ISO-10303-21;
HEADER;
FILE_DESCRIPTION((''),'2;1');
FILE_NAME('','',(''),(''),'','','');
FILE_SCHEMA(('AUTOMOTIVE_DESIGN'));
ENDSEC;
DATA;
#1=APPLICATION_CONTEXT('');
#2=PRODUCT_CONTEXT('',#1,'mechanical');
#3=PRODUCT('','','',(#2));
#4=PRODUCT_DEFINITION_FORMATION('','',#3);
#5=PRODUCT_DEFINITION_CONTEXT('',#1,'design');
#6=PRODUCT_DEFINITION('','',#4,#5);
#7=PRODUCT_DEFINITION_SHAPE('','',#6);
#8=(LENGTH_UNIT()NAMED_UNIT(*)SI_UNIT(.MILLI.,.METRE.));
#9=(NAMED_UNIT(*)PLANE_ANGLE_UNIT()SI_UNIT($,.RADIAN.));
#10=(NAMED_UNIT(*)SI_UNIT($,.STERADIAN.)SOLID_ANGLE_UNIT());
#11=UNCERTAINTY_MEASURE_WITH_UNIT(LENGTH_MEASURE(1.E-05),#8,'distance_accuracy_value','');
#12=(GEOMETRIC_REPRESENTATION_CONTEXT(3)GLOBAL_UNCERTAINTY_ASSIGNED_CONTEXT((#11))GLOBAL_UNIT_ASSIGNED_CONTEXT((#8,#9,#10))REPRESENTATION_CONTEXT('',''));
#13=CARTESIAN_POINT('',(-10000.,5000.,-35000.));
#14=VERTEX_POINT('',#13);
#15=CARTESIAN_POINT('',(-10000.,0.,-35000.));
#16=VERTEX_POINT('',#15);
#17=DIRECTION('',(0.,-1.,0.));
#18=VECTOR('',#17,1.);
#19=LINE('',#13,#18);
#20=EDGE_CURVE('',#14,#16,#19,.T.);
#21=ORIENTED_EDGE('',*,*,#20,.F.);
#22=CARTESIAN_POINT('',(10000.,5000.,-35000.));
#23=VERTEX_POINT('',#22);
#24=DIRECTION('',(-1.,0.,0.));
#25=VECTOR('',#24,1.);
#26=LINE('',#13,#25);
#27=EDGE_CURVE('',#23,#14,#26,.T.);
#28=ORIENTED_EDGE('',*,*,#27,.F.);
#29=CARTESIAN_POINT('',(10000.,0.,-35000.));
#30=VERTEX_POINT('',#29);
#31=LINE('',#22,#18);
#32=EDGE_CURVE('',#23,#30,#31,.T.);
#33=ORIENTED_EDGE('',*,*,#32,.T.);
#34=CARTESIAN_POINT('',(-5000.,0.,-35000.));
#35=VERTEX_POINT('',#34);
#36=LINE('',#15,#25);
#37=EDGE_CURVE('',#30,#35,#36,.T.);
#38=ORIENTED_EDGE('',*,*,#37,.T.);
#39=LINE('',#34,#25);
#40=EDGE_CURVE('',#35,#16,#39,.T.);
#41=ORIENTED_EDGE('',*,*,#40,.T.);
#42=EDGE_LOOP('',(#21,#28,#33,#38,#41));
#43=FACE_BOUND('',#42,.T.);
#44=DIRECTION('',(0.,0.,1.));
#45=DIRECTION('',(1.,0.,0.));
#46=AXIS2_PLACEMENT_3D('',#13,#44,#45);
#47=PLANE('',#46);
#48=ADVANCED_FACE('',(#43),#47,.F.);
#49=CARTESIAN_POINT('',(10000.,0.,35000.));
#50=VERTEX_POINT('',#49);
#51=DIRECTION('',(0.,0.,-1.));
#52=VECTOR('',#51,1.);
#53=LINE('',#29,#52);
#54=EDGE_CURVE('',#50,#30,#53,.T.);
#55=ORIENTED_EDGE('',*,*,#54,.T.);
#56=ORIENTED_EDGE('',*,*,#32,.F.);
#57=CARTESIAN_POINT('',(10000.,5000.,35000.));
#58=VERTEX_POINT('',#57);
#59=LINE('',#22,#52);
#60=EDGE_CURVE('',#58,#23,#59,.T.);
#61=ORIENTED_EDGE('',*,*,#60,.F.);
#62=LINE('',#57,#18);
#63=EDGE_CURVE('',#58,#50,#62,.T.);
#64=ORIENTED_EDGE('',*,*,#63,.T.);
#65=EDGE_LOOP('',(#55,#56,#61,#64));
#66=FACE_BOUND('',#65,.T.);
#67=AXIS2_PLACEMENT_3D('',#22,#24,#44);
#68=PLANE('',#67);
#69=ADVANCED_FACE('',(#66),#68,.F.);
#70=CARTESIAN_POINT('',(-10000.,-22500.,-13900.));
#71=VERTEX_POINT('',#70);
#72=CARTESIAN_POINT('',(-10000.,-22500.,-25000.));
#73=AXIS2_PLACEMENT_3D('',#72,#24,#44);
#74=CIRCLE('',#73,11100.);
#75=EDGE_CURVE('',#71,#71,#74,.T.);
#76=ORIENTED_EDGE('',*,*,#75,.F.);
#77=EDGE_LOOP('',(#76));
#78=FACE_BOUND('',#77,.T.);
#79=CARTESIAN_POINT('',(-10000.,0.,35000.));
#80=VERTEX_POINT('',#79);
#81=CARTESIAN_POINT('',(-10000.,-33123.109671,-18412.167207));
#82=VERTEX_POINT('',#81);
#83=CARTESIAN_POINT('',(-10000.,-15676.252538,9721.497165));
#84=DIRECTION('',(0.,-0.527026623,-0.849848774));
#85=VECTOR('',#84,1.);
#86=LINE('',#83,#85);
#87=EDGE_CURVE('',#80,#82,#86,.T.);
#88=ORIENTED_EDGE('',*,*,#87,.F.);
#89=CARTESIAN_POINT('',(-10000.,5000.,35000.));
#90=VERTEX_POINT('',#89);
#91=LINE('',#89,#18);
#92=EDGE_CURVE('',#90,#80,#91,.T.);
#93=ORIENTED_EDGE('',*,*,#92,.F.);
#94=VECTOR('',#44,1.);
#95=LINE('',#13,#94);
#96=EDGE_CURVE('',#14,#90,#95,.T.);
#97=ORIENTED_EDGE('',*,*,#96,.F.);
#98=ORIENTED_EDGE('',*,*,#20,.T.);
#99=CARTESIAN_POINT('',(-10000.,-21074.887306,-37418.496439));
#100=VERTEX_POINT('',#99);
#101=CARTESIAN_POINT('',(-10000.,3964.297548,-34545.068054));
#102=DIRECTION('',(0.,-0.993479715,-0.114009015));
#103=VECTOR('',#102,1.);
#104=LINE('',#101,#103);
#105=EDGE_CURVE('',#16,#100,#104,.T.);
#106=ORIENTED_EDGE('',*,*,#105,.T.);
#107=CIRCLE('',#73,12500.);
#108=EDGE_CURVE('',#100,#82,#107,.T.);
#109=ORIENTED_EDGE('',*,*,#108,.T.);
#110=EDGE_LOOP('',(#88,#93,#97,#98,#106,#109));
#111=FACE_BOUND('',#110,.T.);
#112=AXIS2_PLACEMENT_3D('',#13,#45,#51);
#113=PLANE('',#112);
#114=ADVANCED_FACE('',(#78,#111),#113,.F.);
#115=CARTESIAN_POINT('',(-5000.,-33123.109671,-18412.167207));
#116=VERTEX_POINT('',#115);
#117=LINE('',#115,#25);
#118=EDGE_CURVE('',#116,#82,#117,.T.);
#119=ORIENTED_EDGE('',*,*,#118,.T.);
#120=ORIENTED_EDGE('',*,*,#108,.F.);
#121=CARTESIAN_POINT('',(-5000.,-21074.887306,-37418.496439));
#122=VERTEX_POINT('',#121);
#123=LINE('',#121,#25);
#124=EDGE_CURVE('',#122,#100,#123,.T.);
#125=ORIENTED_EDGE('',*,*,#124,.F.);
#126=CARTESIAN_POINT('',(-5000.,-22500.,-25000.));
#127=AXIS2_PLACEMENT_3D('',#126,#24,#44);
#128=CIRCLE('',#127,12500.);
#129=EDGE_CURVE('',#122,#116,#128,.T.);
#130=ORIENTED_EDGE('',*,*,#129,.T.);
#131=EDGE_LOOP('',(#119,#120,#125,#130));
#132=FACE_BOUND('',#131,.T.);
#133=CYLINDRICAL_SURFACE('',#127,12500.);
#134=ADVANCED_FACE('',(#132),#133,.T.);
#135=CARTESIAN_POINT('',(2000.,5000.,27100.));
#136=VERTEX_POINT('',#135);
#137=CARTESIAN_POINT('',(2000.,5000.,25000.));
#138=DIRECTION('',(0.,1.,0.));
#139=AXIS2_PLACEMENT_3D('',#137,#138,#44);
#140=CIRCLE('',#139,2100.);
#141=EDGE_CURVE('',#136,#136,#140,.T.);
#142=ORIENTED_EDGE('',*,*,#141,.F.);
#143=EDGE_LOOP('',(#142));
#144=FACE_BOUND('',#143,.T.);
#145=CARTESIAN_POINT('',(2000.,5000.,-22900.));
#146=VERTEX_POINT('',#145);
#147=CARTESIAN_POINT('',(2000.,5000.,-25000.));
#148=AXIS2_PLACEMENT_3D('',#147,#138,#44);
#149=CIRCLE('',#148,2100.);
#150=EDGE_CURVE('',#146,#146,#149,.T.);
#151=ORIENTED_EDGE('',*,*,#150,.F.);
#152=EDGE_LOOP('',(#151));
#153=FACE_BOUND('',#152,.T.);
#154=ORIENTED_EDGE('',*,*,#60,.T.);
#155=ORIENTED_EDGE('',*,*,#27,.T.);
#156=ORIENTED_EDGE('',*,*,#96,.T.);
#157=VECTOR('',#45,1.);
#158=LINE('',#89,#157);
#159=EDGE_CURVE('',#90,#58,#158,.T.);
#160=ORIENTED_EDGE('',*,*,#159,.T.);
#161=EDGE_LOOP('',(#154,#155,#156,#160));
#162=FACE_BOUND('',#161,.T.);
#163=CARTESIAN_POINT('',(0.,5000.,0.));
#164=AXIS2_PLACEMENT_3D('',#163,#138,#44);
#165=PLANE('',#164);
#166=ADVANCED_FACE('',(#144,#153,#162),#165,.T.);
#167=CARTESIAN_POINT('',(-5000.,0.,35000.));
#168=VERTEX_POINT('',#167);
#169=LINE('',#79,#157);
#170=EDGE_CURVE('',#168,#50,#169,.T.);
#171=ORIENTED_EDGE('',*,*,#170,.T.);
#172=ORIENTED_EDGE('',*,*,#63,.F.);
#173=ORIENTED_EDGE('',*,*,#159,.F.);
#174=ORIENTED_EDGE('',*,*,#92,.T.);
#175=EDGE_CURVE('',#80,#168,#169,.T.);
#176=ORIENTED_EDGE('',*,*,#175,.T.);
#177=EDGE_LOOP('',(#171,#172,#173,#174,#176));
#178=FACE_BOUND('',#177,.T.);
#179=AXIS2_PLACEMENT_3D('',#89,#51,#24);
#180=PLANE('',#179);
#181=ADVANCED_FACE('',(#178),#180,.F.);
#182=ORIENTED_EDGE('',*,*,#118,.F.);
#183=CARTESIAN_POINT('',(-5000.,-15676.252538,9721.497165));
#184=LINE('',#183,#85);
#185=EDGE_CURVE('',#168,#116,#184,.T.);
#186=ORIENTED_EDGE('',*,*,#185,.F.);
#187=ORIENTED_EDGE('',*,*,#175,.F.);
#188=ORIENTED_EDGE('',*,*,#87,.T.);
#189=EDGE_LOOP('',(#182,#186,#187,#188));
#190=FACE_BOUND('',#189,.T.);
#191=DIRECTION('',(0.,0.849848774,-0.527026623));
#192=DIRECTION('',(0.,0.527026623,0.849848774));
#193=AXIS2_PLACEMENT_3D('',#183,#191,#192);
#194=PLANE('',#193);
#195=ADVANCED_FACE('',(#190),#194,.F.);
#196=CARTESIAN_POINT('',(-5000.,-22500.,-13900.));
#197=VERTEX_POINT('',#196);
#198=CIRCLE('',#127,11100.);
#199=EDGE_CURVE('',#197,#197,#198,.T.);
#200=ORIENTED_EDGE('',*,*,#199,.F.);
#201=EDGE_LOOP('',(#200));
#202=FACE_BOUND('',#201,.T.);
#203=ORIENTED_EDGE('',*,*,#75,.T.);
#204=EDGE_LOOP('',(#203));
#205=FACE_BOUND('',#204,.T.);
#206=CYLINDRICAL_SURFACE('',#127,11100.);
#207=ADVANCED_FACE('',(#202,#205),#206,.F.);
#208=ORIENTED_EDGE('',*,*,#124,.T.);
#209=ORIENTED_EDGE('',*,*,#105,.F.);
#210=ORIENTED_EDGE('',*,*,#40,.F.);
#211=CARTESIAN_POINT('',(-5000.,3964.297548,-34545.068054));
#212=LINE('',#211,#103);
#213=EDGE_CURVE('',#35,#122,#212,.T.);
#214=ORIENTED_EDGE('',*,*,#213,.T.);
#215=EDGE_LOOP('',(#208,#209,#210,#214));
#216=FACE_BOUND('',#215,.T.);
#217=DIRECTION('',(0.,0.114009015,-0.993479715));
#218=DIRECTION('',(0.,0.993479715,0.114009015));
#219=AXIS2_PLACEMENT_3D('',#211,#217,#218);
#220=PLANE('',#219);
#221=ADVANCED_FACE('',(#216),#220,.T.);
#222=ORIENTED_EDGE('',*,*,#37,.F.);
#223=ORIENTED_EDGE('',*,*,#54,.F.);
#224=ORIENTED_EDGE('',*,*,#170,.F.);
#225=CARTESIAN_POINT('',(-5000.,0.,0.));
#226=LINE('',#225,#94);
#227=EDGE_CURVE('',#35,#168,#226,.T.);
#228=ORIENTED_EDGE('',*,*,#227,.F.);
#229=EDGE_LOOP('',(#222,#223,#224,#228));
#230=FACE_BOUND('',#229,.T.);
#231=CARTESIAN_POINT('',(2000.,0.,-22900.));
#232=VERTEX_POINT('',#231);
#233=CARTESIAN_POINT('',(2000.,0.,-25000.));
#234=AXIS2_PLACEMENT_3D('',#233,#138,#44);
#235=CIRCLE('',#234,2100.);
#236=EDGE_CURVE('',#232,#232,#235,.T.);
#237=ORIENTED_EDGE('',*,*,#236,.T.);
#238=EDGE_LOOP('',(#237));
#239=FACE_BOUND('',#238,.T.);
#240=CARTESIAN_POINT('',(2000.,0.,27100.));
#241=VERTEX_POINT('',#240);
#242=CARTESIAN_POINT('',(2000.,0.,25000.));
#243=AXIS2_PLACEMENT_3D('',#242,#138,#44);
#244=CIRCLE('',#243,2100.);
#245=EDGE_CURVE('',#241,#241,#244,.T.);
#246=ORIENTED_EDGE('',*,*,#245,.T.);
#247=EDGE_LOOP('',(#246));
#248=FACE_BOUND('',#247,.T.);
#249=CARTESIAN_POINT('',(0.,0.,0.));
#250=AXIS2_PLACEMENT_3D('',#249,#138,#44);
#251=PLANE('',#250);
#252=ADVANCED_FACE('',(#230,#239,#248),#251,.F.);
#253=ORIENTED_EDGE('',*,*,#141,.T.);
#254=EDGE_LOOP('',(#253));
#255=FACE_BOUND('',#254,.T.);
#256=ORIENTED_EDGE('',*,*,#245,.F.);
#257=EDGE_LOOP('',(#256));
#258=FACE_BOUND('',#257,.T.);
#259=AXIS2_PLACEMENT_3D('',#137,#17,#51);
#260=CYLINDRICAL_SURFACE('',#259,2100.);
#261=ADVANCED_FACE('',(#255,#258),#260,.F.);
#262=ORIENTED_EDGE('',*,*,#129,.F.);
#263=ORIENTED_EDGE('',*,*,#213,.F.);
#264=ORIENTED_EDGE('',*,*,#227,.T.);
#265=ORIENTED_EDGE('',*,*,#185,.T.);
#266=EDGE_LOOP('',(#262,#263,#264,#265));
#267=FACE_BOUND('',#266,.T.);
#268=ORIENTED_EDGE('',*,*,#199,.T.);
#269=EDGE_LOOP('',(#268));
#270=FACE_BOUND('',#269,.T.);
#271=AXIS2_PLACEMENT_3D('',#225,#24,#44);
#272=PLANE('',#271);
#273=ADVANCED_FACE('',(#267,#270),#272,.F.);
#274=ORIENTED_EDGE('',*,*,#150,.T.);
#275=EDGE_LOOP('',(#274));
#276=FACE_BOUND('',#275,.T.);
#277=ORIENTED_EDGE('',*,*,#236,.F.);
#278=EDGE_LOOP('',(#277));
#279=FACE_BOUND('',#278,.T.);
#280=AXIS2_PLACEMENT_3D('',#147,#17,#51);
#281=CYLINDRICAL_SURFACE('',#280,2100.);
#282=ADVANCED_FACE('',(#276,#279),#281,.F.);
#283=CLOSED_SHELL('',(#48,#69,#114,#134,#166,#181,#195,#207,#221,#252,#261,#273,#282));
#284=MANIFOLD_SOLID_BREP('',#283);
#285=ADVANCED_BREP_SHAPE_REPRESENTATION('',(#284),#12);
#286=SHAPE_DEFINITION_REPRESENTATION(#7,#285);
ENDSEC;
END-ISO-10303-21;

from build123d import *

# Parameters (mm, degrees)
SKETCH_1_W          = 20000
SKETCH_1_H          = 70000
SKETCH_1_R          = 2100
EXTRUDE_1_DEPTH     = 5000
EXTRUDE_4_DEPTH     = 5000
SKETCH_2_7_R        = 11100
EXTRUDE_5_DEPTH     = 5000
SKETCH_3_W          = 17634.57068131
SKETCH_3_H          = 22931.716444608
CUT_EXTRUDE_1_DEPTH = 24449


with BuildPart() as part:
    # 草圖1 → 填料-伸長1 (new body)
    with BuildSketch(Plane(origin=(0, 0, 0), x_dir=(1, 0, 0), z_dir=(0, 1, 0))):
        Rectangle(SKETCH_1_W, SKETCH_1_H)
        with Locations((2000, 25000)):
            Circle(SKETCH_1_R, mode=Mode.SUBTRACT)
        with Locations((2000, -25000)):
            Circle(SKETCH_1_R, mode=Mode.SUBTRACT)
    extrude(amount=EXTRUDE_1_DEPTH)

    # 草圖2<7> → 填料-伸長5 (add)
    with BuildSketch(Plane.ZY.offset(10000)):
        with BuildLine():
            Line((35000, 0), (-35000, 0))
            Line((-35000, 0), (-37418.496439194, -21074.887306309))
            ThreePointArc((-37418.496439194, -21074.887306309), (-31692.464058642, -33057.505615617), (-18412.167206629, -33123.109671211))
            Line((-18412.167206629, -33123.109671211), (35000, 0))
        make_face()
        with Locations((-25000, -22500)):
            Circle(SKETCH_2_7_R, mode=Mode.SUBTRACT)
    extrude(amount=-EXTRUDE_5_DEPTH)


with BuildPart() as body_2:
    # 草圖2 → 填料-伸長4 (new body)
    with BuildSketch(Plane.ZY.offset(10000)):
        with BuildLine():
            ThreePointArc((-37500, 27500), (-37423.54668342, 26119.605924064), (-37195.12195122, 24756.097560976))
            Line((-37195.12195122, 24756.097560976), (-37500, 27500))
        make_face()
    extrude(amount=-EXTRUDE_4_DEPTH)

    # 草圖3 → 除料-伸長1 (cut)
    with BuildSketch(Plane.ZY.offset(10000)):
        with Locations((-31332.50292694, 16465.858222304)):
            Rectangle(SKETCH_3_W, SKETCH_3_H)
    extrude(amount=-CUT_EXTRUDE_1_DEPTH, mode=Mode.SUBTRACT)


solid = part.part
